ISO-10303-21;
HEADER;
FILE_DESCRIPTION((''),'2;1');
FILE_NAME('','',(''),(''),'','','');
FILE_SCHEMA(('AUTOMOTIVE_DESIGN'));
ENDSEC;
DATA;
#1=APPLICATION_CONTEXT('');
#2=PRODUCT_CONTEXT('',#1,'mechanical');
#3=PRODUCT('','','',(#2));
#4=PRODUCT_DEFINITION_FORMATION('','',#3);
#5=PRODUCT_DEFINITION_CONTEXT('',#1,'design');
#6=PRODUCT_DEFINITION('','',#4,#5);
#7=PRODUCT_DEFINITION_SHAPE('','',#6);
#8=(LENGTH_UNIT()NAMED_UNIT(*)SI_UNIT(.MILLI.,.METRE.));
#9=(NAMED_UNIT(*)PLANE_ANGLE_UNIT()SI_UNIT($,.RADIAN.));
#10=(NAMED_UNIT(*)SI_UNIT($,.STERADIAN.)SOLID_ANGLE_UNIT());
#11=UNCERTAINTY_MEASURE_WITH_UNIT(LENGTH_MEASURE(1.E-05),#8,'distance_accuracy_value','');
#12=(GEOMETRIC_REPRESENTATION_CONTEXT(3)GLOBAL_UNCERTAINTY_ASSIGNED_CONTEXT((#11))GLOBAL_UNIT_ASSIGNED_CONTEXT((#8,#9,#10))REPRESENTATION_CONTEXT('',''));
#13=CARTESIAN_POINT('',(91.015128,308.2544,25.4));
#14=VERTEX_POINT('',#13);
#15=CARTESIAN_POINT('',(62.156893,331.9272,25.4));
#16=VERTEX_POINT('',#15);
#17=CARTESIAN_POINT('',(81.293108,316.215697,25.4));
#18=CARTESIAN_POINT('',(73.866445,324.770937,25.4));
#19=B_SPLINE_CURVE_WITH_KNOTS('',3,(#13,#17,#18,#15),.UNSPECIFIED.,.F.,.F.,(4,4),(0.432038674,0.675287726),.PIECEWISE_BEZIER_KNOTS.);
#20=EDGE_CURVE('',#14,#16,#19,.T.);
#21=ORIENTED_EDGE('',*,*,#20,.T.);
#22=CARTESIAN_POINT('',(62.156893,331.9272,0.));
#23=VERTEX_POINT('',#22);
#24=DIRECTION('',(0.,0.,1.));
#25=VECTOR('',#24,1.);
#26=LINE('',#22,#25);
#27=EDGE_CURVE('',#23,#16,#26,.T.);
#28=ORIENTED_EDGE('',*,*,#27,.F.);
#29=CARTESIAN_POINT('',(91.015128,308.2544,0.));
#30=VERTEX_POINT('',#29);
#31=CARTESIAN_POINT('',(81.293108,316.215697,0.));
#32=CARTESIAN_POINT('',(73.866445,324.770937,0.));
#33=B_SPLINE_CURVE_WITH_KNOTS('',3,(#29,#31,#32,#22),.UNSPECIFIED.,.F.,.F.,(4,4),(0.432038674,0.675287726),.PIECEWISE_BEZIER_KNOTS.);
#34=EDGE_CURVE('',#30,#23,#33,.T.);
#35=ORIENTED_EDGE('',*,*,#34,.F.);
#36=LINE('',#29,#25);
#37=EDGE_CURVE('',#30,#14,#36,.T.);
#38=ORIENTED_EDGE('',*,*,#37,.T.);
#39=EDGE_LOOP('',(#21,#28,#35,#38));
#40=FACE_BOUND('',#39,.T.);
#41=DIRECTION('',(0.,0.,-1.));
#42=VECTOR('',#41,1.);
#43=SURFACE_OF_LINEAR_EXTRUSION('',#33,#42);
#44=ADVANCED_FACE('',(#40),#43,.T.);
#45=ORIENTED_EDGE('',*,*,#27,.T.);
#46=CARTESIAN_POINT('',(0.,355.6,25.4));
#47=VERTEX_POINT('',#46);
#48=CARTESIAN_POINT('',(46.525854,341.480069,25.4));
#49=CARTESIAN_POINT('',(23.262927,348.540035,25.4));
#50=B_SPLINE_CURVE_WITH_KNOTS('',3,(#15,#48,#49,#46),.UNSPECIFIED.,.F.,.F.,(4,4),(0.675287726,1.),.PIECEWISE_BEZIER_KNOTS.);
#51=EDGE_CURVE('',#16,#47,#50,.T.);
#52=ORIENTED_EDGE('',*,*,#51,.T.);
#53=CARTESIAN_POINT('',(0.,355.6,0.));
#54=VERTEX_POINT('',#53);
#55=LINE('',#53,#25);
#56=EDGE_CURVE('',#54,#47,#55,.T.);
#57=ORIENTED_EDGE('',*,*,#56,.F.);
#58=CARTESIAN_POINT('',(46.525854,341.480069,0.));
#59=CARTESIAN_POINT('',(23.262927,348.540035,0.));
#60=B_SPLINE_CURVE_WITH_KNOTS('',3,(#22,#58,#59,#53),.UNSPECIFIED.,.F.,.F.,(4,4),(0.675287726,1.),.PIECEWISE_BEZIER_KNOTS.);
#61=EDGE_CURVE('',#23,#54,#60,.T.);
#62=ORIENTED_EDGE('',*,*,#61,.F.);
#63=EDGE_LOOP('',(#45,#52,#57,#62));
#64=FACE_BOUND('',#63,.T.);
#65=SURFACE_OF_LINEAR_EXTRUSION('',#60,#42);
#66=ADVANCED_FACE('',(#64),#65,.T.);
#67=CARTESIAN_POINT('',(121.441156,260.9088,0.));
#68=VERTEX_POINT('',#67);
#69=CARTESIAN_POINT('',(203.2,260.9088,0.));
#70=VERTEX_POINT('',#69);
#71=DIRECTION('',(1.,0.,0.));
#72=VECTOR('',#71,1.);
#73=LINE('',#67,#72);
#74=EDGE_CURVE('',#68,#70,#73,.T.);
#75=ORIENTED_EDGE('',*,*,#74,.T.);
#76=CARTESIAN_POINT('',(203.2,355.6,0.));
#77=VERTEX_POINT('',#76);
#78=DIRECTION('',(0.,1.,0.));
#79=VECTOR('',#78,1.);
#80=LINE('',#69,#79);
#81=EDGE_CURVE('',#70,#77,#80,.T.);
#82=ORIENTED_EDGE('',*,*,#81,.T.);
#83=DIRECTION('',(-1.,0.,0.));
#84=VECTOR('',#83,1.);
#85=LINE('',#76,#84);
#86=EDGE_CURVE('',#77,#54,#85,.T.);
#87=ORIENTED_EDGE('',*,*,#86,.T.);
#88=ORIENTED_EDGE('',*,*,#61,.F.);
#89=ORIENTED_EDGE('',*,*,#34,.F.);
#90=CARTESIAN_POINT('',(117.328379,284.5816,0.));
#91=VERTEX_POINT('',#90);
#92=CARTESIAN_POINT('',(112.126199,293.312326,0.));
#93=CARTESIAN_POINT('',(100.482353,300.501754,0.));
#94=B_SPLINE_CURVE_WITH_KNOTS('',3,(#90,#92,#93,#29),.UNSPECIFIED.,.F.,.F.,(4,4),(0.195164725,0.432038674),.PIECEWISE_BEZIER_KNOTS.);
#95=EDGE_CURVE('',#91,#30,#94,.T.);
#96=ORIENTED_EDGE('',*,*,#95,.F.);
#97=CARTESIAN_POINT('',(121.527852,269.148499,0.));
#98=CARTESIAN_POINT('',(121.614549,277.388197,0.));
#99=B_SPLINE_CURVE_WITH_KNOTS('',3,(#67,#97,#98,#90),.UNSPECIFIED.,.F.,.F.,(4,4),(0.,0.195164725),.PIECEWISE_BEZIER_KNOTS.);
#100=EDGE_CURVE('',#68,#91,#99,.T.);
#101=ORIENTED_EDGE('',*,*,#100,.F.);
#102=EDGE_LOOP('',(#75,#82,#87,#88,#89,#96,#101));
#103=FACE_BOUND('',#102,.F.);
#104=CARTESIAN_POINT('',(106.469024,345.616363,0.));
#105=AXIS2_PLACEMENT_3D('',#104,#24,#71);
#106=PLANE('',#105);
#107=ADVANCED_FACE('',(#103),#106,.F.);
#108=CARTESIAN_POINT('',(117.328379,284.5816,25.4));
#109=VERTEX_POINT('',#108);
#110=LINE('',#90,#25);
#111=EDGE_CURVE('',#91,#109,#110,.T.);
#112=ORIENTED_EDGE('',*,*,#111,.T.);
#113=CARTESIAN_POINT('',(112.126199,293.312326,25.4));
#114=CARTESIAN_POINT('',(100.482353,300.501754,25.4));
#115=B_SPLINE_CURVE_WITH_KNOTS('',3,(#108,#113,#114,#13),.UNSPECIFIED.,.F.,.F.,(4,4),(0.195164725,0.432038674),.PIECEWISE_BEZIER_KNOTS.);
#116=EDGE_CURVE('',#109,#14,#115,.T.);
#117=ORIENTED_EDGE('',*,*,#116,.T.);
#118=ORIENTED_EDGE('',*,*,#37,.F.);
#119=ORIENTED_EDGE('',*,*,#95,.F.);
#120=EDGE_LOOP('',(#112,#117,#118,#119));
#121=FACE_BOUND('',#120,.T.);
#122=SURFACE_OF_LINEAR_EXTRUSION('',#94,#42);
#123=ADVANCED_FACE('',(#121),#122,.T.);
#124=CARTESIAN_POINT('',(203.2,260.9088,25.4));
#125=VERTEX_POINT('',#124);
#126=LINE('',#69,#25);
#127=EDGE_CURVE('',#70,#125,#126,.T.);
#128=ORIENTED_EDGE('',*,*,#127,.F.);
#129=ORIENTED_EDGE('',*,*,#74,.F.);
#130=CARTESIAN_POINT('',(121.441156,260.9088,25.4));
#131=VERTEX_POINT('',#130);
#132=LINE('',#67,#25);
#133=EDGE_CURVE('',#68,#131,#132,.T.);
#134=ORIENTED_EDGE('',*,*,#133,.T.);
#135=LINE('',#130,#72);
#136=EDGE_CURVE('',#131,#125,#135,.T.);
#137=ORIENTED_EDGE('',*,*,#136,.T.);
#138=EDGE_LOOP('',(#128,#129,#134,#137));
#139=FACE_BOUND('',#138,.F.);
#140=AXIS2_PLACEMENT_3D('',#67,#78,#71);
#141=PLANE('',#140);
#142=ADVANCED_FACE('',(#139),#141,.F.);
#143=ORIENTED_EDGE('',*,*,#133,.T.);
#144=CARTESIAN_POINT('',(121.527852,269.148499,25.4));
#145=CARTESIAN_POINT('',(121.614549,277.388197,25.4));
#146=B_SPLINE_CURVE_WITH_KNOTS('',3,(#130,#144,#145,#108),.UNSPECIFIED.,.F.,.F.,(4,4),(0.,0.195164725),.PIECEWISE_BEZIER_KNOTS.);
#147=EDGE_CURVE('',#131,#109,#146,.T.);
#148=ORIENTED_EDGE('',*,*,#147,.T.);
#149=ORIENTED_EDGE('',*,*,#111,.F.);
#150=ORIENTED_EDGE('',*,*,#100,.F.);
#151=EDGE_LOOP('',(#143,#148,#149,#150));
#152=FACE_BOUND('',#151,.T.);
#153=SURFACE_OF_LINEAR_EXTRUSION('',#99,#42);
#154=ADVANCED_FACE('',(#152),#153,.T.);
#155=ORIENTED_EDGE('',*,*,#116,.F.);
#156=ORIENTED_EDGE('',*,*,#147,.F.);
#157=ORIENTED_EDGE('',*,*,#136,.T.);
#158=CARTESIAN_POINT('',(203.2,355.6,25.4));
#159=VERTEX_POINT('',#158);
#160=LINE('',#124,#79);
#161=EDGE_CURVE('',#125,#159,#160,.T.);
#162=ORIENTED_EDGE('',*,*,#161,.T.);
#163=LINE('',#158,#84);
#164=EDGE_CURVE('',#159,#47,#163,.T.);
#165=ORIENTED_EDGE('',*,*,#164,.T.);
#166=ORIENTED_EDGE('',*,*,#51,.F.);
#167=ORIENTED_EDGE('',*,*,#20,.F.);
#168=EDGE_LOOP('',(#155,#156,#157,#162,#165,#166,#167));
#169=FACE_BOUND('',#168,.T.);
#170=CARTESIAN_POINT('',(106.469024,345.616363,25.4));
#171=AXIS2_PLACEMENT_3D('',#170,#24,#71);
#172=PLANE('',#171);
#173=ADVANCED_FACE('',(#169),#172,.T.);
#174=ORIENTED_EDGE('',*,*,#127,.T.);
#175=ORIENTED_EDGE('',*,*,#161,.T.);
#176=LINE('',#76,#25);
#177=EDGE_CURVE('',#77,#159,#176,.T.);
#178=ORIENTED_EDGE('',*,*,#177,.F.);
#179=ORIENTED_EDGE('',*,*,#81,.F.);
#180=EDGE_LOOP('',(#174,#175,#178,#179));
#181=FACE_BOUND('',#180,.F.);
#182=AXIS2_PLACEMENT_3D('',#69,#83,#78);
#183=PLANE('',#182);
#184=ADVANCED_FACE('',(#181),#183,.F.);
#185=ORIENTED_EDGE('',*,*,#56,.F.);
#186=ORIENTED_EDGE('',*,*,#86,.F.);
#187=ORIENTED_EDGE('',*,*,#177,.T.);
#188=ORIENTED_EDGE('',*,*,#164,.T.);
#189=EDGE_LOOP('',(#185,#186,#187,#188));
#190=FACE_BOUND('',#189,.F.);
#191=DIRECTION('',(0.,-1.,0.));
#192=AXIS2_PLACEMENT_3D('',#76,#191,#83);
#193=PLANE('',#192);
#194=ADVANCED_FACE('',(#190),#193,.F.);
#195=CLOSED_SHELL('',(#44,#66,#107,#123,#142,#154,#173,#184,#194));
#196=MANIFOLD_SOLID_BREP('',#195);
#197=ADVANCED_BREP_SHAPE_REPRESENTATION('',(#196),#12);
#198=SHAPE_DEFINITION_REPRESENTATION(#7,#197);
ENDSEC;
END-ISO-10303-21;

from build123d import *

# Parameters (mm, degrees)
F1_DEPTH = 25.4


with BuildPart() as f1:
    # F0 (on Top) → F1 (new body)
    with BuildSketch(Plane.XY):
        with BuildLine():
            Line((62.1568927622, 331.9272), (203.2, 331.9272))
            Line((203.2, 331.9272), (203.2, 355.6))
            Line((203.2, 355.6), (0, 355.6))
            add(Edge.make_bspline(
                [(62.1568927622, 331.9272), (46.5258539889, 341.4800694919), (23.2629269944, 348.540034746), (0, 355.6)],
                knots=[0.6752877262, 0.6752877262, 0.6752877262, 0.6752877262, 1, 1, 1, 1], degree=3))
        make_face()
        with BuildLine():
            Line((91.0151283785, 308.2544), (203.2, 308.2544))
            Line((203.2, 308.2544), (203.2, 331.9272))
            Line((203.2, 331.9272), (62.1568927622, 331.9272))
            add(Edge.make_bspline(
                [(91.0151283785, 308.2544), (81.293107614, 316.2156971088), (73.8664451152, 324.7709369352), (62.1568927622, 331.9272)],
                knots=[0.4320386737, 0.4320386737, 0.4320386737, 0.4320386737, 0.6752877262, 0.6752877262, 0.6752877262, 0.6752877262], degree=3))
        make_face()
        with BuildLine():
            Line((117.3283786334, 284.5816), (203.2, 284.5816))
            Line((203.2, 284.5816), (203.2, 308.2544))
            Line((203.2, 308.2544), (91.0151283785, 308.2544))
            add(Edge.make_bspline(
                [(117.3283786334, 284.5816), (112.1261985969, 293.312325694), (100.4823531117, 300.5017536394), (91.0151283785, 308.2544)],
                knots=[0.1951647253, 0.1951647253, 0.1951647253, 0.1951647253, 0.4320386737, 0.4320386737, 0.4320386737, 0.4320386737], degree=3))
        make_face()
        with BuildLine():
            Line((121.441156018, 260.9088), (203.2, 260.9088))
            Line((203.2, 260.9088), (203.2, 284.5816))
            Line((203.2, 284.5816), (117.3283786334, 284.5816))
            add(Edge.make_bspline(
                [(121.441156018, 260.9088), (121.5278523804, 269.1484986902), (121.6145487428, 277.3881973804), (117.3283786334, 284.5816)],
                knots=[0, 0, 0, 0, 0.1951647253, 0.1951647253, 0.1951647253, 0.1951647253], degree=3))
        make_face()
    extrude(amount=F1_DEPTH)


solid = f1.part
